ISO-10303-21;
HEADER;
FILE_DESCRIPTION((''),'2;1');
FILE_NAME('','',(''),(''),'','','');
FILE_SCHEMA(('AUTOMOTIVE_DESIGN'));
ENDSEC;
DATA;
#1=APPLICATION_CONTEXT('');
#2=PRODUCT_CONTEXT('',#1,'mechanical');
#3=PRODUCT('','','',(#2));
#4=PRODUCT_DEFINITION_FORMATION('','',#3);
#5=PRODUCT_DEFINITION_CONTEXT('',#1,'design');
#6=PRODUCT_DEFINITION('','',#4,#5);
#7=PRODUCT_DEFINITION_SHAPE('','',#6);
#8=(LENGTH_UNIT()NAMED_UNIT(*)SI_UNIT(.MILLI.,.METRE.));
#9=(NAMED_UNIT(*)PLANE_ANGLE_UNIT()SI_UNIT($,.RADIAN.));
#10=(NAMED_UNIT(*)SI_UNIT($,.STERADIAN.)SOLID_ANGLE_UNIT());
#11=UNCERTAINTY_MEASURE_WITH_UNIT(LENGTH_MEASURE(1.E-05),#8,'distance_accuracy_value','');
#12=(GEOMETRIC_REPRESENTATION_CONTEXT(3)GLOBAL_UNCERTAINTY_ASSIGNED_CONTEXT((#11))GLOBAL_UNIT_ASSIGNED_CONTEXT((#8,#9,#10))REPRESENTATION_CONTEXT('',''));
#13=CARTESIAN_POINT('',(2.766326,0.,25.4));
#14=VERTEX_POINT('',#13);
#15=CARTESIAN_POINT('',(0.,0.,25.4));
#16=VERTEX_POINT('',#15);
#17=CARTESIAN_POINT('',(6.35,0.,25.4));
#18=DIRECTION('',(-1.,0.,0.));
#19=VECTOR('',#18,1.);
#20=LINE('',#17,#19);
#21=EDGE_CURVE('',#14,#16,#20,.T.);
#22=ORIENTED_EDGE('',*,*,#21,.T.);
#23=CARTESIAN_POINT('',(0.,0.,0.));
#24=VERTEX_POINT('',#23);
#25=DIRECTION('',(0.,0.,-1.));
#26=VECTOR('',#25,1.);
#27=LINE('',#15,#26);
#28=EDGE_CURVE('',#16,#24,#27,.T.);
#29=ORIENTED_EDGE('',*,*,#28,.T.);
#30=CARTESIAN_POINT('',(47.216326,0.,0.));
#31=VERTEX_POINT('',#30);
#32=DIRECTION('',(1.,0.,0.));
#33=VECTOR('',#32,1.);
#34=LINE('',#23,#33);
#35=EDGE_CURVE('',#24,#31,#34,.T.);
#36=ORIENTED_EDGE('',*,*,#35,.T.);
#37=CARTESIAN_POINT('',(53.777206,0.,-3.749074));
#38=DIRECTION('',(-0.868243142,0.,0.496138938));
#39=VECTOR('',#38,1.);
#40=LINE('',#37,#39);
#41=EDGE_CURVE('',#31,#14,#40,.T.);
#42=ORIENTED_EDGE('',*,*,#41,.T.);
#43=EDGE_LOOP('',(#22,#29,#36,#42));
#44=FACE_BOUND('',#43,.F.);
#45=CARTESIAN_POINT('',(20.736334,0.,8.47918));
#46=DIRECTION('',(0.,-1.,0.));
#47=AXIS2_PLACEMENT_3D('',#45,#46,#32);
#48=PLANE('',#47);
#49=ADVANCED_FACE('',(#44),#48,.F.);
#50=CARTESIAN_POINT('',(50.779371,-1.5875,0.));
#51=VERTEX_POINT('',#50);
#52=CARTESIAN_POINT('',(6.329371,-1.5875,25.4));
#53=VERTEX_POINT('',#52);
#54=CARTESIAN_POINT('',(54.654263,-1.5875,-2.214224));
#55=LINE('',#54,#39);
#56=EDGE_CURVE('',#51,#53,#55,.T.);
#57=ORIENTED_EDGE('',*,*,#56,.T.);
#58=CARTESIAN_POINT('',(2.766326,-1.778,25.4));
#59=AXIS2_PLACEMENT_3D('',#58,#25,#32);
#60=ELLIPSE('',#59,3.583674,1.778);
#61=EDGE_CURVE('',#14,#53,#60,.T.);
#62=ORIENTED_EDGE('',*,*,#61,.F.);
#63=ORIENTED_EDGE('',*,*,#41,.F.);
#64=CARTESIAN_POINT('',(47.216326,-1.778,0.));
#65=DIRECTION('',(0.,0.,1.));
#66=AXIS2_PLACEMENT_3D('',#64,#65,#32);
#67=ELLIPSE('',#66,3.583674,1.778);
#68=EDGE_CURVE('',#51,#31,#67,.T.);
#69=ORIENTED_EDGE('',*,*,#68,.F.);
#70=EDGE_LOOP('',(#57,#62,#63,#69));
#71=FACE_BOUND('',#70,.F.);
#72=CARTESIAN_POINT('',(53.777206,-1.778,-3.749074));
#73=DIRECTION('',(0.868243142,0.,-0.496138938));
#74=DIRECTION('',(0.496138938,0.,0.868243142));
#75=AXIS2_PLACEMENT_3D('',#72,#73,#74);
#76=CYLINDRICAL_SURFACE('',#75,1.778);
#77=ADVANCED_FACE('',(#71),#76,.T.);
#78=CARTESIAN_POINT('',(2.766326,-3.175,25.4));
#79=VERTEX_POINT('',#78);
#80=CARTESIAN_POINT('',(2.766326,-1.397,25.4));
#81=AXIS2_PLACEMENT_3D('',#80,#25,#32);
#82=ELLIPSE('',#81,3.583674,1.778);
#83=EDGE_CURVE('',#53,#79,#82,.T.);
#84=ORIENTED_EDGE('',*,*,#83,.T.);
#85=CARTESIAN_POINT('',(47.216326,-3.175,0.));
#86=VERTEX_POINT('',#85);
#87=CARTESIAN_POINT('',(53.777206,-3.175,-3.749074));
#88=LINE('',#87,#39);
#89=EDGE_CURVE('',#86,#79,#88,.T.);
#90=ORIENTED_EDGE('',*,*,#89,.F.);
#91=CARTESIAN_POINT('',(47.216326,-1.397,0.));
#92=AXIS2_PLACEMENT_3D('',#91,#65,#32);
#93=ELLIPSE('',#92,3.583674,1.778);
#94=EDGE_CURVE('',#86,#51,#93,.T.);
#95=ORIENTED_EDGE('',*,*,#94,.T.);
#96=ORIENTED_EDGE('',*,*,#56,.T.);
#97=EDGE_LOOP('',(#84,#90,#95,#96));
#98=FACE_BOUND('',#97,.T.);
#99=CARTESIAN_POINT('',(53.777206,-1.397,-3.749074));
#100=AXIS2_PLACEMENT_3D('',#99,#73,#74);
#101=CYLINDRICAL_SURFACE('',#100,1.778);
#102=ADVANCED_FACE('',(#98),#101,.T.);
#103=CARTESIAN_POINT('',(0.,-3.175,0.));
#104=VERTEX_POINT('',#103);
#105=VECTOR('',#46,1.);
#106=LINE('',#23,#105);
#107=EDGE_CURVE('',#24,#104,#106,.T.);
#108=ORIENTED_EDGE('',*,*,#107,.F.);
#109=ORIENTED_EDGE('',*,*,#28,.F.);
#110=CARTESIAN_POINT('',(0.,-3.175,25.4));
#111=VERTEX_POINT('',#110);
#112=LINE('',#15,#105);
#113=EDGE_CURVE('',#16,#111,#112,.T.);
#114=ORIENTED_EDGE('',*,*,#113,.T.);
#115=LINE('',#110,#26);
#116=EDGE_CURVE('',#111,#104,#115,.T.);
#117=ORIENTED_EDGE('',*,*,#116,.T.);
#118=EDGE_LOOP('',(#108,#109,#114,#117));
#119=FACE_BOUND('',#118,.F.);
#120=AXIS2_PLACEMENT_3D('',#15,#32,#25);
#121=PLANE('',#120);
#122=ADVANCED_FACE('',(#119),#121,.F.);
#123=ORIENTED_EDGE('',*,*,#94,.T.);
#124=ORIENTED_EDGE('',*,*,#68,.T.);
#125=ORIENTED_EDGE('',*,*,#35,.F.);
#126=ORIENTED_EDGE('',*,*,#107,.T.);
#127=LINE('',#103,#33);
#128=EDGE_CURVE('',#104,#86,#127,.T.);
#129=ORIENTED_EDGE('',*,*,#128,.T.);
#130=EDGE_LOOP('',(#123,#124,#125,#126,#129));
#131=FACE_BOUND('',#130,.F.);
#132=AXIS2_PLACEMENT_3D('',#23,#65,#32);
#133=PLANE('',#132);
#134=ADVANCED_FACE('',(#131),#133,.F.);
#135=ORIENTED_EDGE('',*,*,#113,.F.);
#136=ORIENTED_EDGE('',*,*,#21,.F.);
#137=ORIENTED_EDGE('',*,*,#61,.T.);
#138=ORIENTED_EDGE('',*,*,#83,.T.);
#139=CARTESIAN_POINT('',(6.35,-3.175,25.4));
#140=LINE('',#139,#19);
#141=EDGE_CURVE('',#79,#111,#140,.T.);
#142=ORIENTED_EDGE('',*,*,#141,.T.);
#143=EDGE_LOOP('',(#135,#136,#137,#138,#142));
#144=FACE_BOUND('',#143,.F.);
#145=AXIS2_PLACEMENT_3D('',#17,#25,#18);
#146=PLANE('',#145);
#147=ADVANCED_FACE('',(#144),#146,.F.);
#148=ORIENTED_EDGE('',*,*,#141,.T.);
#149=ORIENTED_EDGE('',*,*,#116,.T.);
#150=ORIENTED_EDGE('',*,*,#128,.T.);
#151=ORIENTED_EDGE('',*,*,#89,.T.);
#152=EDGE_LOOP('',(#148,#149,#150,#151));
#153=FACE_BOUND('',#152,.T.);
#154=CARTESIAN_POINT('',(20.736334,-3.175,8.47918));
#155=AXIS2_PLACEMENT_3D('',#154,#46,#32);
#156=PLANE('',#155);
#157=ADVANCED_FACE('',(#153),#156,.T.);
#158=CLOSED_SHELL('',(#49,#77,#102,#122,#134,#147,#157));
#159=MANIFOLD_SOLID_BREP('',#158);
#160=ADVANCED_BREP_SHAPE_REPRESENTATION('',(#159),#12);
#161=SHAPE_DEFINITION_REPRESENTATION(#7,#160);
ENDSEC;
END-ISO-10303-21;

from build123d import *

# Parameters (mm, degrees)
F1_DEPTH    = 3.175
F2_T1_DEPTH = 60.0853367017


# Not quite as in the source:
# - a fillet or chamfer that OpenCascade refuses, or shapes differently, is made with other operations: its cross-section is extruded or revolved along the edge and cut away or added


with BuildPart() as f1:
    # F0 (on Front) → F1 (new body)
    with BuildSketch(Plane.XZ):
        Polygon((0, 25.4), (0, 0), (50.8, 0), (6.35, 25.4), align=None)
    extrude(amount=F1_DEPTH)

    # F2: fillet of radius 1.778 on 2 edges, made by hand

    # F2_s2 → F2_t1 (cut)
    with BuildSketch(Plane(origin=(42.1547253821, 0, -24.0884145041), x_dir=(0, 1, 0), z_dir=(-0.8682431421, 0, 0.4961389384))):
        with BuildLine():
            ThreePointArc((-1.397, -25.2038580685), (-2.6542358569, -24.6830939255), (-3.175, -23.4258580685))
            Line((-3.175, -23.4258580685), (-3.175, -25.2038580685))
            Line((-3.175, -25.2038580685), (-1.397, -25.2038580685))
        make_face()
        with BuildLine():
            ThreePointArc((-1.778, -25.2038580685), (-0.5207641431, -24.6830939255), (0, -23.4258580685))
            Line((0, -23.4258580685), (0, -25.2038580685))
            Line((0, -25.2038580685), (-1.778, -25.2038580685))
        make_face()
    extrude(amount=F2_T1_DEPTH, mode=Mode.SUBTRACT)


solid = f1.part
